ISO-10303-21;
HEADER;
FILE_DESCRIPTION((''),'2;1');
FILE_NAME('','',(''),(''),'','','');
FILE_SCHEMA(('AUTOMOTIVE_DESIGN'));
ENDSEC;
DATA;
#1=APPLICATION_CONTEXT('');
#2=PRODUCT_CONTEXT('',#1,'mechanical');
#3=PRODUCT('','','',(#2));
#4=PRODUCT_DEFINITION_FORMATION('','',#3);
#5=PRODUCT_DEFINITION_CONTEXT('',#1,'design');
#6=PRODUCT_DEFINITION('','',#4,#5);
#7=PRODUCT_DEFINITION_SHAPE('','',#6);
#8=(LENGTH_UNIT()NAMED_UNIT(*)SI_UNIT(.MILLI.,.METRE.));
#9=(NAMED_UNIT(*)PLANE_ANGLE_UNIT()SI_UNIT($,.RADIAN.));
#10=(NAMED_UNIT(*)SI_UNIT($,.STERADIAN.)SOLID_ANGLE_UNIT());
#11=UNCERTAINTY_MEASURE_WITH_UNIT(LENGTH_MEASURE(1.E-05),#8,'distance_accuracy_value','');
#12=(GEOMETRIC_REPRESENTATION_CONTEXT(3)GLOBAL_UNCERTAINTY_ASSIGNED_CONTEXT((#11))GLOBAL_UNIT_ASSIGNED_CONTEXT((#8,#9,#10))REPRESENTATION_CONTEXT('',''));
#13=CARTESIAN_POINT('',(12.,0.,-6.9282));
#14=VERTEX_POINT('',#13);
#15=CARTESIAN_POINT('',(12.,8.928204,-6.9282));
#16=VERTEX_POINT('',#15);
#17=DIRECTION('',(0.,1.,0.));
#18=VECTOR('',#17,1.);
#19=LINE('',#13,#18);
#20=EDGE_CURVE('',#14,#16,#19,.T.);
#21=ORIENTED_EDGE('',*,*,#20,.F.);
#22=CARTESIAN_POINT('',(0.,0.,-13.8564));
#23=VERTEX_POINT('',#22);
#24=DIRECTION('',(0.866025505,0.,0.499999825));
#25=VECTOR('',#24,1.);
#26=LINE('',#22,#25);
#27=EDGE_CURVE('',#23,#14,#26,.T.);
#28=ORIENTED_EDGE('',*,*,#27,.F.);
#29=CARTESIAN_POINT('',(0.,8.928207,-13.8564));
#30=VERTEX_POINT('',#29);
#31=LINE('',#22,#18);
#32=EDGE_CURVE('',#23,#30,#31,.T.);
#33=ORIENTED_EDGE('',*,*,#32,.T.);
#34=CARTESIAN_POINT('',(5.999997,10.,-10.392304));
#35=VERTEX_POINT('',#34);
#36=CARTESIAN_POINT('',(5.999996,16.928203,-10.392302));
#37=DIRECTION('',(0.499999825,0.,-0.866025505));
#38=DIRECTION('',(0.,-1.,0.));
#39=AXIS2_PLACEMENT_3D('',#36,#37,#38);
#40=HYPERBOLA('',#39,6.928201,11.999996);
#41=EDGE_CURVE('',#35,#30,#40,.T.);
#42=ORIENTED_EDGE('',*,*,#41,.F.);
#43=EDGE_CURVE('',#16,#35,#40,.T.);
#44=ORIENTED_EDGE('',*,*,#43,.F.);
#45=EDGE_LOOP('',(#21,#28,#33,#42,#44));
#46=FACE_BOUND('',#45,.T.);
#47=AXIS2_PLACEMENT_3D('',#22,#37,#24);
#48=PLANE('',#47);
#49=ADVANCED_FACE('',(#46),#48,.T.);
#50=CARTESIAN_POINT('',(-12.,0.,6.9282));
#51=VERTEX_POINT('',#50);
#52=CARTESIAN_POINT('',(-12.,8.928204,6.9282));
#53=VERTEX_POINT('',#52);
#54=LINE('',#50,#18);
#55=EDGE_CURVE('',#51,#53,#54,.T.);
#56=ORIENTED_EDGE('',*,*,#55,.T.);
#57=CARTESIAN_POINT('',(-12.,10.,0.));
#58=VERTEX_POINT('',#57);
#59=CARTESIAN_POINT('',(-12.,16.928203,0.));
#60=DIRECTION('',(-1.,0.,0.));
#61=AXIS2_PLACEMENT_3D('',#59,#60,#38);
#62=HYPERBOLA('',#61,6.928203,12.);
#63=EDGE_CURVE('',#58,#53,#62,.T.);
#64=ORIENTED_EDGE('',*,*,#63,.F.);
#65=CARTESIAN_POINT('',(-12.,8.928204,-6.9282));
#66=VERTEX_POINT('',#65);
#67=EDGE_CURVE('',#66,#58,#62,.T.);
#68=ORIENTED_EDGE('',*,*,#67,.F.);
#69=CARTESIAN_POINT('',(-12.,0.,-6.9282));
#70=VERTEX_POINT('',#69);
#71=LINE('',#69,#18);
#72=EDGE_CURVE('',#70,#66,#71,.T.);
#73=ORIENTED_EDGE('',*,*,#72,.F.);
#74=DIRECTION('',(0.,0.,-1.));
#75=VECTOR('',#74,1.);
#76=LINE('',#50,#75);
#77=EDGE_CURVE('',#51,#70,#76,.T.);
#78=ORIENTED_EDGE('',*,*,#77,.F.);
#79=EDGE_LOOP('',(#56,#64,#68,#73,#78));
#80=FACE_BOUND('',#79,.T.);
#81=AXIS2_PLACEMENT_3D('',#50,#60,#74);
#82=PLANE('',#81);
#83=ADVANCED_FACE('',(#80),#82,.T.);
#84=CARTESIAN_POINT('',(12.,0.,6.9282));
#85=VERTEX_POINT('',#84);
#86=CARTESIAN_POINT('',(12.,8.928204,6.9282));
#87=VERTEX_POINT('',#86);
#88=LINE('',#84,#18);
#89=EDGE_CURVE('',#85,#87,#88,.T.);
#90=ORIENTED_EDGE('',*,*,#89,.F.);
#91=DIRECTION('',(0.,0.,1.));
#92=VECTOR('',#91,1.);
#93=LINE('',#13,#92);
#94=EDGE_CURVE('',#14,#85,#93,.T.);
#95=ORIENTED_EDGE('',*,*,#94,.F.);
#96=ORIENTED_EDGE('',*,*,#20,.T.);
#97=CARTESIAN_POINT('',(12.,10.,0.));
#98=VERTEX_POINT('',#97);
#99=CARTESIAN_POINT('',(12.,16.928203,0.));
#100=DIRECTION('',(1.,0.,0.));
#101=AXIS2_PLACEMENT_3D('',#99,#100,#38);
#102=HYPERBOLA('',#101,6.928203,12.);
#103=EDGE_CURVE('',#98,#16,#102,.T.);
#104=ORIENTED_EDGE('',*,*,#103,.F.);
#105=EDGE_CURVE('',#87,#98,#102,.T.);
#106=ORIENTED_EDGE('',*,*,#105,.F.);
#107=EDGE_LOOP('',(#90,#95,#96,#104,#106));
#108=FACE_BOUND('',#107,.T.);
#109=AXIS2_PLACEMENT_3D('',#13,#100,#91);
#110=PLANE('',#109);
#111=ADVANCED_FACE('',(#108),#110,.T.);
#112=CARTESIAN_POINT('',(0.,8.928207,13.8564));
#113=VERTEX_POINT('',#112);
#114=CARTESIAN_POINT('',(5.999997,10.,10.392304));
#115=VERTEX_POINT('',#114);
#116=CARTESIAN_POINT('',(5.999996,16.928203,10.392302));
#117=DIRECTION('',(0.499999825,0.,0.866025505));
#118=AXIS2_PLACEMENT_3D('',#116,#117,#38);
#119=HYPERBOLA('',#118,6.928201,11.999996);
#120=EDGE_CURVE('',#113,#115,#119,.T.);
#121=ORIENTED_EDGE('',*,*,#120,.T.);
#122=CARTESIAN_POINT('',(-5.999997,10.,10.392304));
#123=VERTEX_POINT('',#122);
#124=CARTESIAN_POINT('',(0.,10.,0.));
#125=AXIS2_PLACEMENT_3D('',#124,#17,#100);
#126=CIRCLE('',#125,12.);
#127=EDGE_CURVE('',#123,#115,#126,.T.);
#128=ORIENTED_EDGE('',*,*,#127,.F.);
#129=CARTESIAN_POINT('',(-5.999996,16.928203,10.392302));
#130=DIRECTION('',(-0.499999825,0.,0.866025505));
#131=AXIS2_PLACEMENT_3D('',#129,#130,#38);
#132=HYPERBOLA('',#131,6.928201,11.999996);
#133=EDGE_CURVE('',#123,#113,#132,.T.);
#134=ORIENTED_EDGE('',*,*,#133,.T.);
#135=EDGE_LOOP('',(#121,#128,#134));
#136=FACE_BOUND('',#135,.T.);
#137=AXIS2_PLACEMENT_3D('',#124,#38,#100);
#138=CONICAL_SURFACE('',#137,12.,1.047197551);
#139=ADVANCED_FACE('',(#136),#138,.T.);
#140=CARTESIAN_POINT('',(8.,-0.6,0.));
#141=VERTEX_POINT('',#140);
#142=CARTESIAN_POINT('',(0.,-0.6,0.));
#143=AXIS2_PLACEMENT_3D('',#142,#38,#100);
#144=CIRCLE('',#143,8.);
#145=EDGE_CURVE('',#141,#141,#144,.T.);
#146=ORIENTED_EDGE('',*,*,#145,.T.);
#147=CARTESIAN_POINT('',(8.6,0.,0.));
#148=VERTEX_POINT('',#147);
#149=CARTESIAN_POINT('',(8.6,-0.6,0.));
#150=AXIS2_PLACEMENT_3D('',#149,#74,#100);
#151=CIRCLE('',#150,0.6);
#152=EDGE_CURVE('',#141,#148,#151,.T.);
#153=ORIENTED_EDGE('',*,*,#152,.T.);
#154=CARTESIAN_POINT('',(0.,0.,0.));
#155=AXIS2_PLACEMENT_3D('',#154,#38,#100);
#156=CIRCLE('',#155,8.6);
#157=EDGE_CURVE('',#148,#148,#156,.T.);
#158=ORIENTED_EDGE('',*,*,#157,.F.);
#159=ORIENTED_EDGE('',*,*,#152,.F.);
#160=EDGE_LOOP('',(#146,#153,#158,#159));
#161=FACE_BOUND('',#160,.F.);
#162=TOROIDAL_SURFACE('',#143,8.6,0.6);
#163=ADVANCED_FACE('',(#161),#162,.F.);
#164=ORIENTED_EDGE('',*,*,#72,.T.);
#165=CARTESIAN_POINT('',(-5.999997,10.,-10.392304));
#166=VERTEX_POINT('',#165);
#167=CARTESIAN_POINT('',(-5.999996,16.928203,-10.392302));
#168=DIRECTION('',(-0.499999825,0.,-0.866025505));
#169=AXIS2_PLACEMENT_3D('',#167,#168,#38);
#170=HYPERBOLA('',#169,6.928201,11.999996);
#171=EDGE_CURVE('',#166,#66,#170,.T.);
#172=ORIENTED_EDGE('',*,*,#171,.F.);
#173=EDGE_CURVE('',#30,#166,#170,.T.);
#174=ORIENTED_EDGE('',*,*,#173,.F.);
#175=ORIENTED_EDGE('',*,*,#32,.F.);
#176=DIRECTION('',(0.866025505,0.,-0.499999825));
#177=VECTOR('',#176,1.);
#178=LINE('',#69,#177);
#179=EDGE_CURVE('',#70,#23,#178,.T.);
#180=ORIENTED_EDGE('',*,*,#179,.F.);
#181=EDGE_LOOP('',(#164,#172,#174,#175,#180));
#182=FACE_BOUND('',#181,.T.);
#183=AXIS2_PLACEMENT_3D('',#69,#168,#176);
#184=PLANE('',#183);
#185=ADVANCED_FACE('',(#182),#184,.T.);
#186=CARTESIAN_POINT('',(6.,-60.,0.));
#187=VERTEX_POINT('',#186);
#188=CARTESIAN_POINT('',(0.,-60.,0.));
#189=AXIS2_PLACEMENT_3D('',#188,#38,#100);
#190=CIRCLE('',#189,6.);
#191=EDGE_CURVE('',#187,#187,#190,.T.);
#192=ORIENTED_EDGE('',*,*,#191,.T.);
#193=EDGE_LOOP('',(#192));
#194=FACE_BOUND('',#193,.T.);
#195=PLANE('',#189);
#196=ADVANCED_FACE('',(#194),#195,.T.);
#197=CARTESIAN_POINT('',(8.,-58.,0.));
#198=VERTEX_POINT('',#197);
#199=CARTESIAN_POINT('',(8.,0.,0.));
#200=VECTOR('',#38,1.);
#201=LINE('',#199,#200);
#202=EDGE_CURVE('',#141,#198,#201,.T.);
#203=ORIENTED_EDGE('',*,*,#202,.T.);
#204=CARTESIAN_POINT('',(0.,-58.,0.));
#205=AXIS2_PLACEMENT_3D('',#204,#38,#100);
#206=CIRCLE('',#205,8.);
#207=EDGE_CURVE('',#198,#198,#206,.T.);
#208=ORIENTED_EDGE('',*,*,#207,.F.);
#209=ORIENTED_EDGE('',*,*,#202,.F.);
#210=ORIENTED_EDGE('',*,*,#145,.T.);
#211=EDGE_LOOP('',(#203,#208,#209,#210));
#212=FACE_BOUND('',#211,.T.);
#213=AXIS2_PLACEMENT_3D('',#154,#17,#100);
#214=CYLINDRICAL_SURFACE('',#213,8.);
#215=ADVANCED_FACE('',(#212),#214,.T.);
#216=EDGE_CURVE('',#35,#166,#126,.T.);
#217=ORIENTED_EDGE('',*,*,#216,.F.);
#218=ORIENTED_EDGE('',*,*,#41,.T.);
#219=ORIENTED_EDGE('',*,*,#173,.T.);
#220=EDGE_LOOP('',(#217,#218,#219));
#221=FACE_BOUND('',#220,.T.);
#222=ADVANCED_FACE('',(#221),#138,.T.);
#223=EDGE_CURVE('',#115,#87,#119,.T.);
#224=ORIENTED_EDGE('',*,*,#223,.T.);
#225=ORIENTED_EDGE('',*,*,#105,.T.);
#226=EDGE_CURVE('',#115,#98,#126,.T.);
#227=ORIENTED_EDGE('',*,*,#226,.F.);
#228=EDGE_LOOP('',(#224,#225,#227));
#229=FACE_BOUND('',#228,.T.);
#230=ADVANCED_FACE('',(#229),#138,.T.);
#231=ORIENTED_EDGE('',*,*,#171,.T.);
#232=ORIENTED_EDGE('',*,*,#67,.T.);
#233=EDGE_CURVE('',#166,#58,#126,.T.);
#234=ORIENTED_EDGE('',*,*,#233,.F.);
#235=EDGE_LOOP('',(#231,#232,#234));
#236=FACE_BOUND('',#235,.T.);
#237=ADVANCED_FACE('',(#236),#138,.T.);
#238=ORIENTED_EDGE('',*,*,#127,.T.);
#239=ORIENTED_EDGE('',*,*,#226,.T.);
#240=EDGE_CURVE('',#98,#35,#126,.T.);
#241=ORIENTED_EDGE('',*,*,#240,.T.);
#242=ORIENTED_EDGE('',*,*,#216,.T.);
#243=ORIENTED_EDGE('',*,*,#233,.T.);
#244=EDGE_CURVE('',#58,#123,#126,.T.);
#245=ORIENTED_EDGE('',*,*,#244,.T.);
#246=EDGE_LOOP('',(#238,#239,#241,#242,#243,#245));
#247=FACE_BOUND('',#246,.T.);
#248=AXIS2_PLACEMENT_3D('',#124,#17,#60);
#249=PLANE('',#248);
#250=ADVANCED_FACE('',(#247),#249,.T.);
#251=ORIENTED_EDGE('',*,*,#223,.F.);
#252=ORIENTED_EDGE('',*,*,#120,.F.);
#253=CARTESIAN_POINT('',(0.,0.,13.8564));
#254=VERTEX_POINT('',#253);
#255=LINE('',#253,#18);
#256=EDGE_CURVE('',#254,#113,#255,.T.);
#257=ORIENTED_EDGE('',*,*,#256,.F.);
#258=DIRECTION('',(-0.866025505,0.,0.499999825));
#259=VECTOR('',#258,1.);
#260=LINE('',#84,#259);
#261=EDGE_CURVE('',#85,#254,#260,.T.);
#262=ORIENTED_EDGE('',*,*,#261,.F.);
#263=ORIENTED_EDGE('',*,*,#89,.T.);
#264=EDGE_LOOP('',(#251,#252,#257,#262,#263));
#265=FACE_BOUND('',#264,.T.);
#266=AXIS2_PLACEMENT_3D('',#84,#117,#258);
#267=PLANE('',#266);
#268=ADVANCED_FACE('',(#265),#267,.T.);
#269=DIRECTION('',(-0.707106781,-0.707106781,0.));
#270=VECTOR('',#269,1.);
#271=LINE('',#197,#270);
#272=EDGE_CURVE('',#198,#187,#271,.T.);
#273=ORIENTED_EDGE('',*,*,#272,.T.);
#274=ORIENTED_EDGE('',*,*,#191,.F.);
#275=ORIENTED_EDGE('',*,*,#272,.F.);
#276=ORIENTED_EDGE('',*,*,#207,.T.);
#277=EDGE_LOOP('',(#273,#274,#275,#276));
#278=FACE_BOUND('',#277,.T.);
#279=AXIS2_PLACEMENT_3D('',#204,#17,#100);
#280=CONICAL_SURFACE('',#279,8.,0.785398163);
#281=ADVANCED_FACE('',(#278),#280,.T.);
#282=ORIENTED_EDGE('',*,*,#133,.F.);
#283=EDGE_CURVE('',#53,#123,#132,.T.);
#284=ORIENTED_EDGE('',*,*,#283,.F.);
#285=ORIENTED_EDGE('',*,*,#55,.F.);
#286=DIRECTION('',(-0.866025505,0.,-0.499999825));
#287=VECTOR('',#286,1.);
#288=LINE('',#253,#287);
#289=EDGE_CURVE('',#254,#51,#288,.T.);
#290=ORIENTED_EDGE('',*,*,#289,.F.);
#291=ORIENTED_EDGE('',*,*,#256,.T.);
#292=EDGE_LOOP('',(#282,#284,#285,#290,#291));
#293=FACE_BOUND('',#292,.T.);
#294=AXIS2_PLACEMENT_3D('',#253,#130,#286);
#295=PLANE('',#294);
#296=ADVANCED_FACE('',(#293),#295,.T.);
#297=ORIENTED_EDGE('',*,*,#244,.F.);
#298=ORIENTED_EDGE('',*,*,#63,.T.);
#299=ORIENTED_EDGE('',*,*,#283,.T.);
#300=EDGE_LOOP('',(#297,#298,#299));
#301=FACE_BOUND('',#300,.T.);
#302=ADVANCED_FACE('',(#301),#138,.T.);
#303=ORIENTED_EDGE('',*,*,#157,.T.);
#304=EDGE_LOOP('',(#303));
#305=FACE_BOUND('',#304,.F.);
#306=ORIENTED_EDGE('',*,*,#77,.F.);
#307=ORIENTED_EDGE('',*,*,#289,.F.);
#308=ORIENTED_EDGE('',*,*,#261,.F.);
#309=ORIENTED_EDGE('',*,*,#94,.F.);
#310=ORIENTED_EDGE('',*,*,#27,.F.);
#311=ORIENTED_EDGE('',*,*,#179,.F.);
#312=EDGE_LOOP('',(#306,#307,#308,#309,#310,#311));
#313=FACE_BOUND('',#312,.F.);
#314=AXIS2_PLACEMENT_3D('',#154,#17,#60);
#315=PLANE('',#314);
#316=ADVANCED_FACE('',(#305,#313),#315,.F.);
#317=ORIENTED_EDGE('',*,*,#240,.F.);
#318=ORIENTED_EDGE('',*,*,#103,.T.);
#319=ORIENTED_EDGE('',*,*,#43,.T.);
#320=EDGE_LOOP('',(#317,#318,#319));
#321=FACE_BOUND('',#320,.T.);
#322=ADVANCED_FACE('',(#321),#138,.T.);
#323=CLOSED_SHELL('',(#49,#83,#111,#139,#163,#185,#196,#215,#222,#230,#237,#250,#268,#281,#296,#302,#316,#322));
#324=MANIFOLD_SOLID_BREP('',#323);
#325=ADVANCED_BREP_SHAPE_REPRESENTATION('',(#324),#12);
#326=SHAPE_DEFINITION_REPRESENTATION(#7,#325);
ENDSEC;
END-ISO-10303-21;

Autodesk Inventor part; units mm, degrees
ref_plane "YZ Plane" through (0, 0, 0) normal (1, 0, 0) x (0, 1, 0)
ref_plane "XZ Plane" through (0, 0, 0) normal (0, 1, 0) x (-1, 0, 0)
ref_plane "XY Plane" through (0, 0, 0) normal (0, 0, 1) x (1, 0, 0)
sketch "Sketch1" plane through (0, 0, 0) normal (0, 1, 0) x (-1, 0, 0)
  line L0 (12, -6.9282) -> (0, -13.8564)
  line L1 (0, -13.8564) -> (-12, -6.9282)
  line L2 (-12, -6.9282) -> (-12, 6.9282)
  line L3 (-12, 6.9282) -> (0, 13.8564)
  line L4 (0, 13.8564) -> (12, 6.9282)
  line L5 (12, 6.9282) -> (12, -6.9282)
  point P0 (0, 0)
  point P1 (0, 0)
  point P2 (-12, 0)
  point P3 (12, 0)
  dimension "d0" = 24
extrude "Extrusion1" add sketch "Sketch1" along normal blind 10
sketch "Sketch2" plane through (0, 10, 0) normal (0, 1, 0) x (1, 0, 0)
  circle A0 centre (0, 0) radius 12
extrude "Extrusion2" cut sketch "Sketch2" against normal blind 10 draft 60 keep common part
sketch "Sketch3" plane through (0, 0, 0) normal (0, -1, 0) x (1, 0, 0)
  circle A0 centre (0, 0) radius 8
  dimension "d5" = 16
extrude "Extrusion3" add sketch "Sketch3" along normal blind 60
thread "Thread1" size "M16x2" class "6g" standard "ANSI Metric M Profile" length 38
chamfer "Chamfer1" distance 2 angle 45 1 edges at (-8, -60, 0)
fillet "Fillet1" radius 0.6 1 edges at (-8, 0, 0)
properties part number "csavark" material "Steel, Alloy"
